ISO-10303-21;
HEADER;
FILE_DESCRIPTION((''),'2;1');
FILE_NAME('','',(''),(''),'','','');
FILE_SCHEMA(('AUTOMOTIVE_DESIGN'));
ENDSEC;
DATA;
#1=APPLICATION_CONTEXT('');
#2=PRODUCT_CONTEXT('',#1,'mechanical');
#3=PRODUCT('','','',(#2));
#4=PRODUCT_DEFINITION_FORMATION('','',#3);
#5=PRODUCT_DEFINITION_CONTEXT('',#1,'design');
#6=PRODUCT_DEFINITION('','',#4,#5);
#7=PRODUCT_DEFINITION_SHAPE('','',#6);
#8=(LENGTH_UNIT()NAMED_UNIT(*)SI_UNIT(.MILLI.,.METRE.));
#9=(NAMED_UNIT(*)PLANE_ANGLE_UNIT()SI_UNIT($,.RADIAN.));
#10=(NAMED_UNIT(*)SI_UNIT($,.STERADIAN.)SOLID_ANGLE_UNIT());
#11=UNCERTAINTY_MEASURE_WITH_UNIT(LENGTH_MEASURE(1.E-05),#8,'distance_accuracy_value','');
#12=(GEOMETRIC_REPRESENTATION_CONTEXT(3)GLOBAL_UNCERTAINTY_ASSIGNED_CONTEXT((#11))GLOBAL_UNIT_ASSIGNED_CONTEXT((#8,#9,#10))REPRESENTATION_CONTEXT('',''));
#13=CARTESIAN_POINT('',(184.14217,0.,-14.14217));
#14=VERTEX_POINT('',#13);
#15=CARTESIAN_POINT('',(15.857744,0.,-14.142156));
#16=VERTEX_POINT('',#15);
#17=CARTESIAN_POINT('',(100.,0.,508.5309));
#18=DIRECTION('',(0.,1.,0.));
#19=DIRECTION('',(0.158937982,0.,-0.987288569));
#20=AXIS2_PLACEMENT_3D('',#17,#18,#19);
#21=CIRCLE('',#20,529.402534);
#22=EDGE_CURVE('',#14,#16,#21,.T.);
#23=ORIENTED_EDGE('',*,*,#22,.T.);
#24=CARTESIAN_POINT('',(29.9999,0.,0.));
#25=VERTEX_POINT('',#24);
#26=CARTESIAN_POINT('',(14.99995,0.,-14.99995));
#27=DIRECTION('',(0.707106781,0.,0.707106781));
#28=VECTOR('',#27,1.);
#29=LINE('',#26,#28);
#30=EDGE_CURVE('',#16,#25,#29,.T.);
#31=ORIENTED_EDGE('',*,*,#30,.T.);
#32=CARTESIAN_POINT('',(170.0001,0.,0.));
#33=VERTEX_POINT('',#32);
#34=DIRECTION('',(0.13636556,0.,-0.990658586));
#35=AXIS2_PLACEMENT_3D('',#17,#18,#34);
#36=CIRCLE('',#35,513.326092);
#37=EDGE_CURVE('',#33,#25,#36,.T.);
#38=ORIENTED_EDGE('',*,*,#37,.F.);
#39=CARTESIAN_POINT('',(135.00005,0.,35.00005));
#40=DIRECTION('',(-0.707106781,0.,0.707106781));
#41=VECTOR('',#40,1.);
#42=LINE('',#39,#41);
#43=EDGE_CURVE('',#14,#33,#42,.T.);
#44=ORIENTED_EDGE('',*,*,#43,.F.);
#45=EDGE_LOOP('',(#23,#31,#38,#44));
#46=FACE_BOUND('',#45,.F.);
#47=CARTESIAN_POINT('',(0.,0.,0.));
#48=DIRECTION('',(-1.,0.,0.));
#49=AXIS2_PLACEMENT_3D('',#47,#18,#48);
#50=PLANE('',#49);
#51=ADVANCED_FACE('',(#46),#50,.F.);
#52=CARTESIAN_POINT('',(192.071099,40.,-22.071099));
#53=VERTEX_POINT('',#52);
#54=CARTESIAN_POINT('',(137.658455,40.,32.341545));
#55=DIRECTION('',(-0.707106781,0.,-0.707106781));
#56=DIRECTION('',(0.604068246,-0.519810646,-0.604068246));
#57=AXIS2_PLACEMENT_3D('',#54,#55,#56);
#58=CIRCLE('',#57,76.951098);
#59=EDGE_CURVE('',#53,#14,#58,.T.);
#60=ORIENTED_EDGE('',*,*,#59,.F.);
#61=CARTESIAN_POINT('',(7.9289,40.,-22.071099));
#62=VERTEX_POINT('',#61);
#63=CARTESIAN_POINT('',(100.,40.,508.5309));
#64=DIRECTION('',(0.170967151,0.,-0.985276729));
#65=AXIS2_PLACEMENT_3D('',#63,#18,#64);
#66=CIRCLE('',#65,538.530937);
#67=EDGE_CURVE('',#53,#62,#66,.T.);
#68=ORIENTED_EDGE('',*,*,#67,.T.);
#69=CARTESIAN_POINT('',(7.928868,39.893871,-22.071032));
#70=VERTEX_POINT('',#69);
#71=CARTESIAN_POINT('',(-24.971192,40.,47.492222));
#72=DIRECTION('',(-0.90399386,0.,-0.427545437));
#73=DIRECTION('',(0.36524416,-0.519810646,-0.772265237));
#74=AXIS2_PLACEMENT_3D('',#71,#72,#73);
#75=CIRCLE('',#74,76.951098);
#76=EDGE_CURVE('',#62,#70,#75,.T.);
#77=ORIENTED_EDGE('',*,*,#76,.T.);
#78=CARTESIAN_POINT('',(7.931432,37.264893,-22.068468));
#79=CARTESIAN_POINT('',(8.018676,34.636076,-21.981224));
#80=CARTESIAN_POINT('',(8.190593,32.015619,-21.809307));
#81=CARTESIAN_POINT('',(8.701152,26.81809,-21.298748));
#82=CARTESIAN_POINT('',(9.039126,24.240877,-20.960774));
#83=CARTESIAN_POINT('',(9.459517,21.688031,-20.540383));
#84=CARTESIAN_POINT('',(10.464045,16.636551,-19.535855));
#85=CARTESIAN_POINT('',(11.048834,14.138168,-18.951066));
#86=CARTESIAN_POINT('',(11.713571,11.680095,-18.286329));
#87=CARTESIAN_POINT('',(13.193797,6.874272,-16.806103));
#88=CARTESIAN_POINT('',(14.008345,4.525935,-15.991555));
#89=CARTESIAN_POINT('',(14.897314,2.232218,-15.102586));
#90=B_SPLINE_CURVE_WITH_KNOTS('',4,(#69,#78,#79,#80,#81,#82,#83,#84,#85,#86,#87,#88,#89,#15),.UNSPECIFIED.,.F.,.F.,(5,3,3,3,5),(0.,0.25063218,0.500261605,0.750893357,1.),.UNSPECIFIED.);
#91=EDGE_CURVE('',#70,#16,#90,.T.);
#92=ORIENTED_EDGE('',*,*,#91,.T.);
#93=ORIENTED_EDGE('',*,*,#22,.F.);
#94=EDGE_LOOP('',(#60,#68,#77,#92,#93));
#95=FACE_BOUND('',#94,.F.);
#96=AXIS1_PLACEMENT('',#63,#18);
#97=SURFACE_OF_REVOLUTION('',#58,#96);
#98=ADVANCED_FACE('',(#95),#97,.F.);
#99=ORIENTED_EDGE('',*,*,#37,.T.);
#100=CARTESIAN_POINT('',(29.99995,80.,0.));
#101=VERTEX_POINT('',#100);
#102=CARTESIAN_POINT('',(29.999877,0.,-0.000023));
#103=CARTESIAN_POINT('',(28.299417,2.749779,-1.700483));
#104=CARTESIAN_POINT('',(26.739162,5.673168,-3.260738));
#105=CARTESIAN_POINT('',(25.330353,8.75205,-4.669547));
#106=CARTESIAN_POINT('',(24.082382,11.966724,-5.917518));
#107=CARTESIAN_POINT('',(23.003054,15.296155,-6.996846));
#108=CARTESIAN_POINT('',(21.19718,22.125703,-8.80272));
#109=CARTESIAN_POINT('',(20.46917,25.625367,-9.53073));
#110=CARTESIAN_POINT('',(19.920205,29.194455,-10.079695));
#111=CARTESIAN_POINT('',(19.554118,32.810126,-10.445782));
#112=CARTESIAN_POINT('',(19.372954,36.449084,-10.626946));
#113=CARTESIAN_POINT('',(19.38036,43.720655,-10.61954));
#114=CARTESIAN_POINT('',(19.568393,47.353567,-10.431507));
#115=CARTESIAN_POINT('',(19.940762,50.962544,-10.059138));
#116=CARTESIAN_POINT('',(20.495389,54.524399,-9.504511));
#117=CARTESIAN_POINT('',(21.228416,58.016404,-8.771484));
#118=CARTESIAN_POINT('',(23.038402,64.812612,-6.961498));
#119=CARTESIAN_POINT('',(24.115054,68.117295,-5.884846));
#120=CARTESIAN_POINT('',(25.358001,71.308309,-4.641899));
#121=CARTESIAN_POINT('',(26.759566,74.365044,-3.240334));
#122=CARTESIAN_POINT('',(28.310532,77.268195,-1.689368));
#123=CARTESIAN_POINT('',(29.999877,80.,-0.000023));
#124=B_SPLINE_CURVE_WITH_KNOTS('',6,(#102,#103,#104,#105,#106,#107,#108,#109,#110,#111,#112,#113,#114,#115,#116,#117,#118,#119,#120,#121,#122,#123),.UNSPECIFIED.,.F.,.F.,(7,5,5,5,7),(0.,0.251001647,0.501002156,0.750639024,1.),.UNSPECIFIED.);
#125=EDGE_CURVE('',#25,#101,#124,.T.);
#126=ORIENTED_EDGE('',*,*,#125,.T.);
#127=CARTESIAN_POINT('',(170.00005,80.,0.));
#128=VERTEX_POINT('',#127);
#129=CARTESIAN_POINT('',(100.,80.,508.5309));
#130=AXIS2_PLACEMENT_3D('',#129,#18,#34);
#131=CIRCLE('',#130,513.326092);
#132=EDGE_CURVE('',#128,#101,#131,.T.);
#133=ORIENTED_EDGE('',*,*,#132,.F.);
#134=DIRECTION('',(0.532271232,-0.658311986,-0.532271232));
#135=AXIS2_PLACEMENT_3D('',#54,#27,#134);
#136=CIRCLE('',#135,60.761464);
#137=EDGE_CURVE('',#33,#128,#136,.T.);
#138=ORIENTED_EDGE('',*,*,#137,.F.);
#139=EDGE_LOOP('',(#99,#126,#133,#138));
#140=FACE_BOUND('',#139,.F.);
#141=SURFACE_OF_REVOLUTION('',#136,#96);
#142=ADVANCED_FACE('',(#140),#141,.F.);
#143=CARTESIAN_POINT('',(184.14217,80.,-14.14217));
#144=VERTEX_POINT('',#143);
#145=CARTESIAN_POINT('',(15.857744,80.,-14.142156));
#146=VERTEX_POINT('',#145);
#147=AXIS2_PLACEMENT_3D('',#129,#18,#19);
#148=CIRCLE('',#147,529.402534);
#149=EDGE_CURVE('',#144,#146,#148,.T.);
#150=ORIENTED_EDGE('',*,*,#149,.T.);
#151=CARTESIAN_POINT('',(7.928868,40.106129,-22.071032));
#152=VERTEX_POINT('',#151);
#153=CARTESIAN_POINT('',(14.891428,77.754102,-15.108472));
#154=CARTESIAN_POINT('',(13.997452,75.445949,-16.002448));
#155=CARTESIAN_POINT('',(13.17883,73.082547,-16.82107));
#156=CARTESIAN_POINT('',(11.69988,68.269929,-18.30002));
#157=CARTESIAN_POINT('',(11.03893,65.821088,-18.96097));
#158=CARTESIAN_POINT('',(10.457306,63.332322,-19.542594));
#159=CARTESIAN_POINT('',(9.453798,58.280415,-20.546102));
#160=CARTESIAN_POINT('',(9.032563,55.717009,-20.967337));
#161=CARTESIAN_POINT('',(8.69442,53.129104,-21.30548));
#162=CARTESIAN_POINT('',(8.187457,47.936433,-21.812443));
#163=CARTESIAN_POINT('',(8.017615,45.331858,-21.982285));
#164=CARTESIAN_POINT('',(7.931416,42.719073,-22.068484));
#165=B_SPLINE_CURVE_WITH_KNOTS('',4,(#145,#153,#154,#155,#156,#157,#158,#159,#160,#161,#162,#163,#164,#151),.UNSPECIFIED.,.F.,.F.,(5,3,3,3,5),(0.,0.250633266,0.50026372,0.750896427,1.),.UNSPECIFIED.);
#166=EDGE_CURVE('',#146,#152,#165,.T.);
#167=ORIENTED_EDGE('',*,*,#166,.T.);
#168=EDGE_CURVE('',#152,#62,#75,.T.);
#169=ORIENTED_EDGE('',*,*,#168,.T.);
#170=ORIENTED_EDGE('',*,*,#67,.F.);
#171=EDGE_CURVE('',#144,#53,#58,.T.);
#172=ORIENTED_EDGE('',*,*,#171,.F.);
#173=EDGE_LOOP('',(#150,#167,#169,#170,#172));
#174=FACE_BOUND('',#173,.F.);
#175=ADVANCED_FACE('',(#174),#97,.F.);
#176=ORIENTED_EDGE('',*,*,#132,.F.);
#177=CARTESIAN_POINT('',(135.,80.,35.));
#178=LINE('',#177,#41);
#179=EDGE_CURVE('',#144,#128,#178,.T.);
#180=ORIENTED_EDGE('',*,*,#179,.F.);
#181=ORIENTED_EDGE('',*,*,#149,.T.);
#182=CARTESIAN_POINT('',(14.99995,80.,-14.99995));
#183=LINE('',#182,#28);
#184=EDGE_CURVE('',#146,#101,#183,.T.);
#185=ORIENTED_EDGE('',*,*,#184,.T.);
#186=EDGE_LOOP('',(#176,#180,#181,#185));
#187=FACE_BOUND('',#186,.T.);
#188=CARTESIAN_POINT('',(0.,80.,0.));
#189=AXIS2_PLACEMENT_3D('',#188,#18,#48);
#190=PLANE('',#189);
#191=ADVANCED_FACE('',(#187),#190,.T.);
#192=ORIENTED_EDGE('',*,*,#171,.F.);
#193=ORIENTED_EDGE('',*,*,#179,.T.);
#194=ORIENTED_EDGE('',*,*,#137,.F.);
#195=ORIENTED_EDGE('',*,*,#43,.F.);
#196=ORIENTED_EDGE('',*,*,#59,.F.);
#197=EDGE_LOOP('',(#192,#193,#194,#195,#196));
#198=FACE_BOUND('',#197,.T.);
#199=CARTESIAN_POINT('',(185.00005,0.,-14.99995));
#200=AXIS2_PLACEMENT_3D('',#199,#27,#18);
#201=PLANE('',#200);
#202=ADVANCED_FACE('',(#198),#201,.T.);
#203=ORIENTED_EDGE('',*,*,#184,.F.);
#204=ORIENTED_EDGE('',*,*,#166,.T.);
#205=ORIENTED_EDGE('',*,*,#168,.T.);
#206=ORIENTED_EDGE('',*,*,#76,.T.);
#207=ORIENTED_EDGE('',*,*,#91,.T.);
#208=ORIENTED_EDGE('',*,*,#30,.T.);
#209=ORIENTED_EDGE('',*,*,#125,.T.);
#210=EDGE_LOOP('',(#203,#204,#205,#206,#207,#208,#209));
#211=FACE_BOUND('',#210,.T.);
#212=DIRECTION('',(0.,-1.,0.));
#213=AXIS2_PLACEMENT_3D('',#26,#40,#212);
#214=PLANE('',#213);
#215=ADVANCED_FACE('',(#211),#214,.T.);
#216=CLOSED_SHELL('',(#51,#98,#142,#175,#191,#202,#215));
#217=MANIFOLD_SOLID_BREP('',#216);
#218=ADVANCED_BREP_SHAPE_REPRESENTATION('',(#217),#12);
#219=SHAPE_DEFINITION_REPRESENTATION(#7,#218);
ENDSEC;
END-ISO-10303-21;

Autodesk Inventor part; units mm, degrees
ref_plane "YZ Plane" through (0, 0, 0) normal (1, 0, 0) x (0, 1, 0)
ref_plane "XZ Plane" through (0, 0, 0) normal (0, 1, 0) x (-1, 0, 0)
ref_plane "XY Plane" through (0, 0, 0) normal (0, 0, 1) x (1, 0, 0)
sketch "Эскиз1" plane through (0, 0, 0) normal (0, 1, 0) x (-1, 0, 0)
  line L0 (0, 0) -> (-200, 0)
  line L1 (-200, 0) -> (-200, -30)
  line L2 (-200, -30) -> (0, -30)
  line L3 (0, -30) -> (0, 0)
  dimension "d0" = 200
  dimension "d1" = 30
extrude "Выдавливание1" add sketch "Эскиз1" along normal blind 80
chamfer "Фаска1" distance 30 angle 45 2 edges at (0, 40, 0) (200, 40, 0)
sketch "Эскиз3" plane through (0, 80, 0) normal (0, 1, 0) x (1, 0, 0)
  line L0 (200, 30) -> (170, 0) projected
  line L1 (200, 30) -> (0, 30) projected
  line L2 (30, 0) -> (0, 30) projected
  line L3 (30, 0) -> (170, 0) projected
  line L4 (30, 0) -> (0, 30) projected
  line L5 (15, 15) -> (7.9289, 22.0711)
  arc A0 (192.0711, 22.0711) -> (7.9289, 22.0711) centre (100, -508.5309) ccw
  line L6 (200, 30) -> (0, 30) projected
  line L7 (30, 0) -> (170, 0) projected
  arc A1 (170, 0) -> (30, 0) centre (100, -508.5309) ccw
  point P0 (0, 0)
  point P1 (100, 0)
  point P2 (100, 0)
  dimension "d11" = 10
extrude "Выдавливание3" cut sketch "Эскиз3" against normal through all contours L0 A0 L1 | A0 L2 L1 | L3 A1
sketch "Эскиз4" plane through (192.0711, 0, -22.0711) normal (0.7071068, 0, 0.7071068) x (0.7071068, 0, -0.7071068)
  line L0 (0, 0) -> (0, 80) projected
  line L1 (0, 80) -> (-31.2132, 80) projected
  line L2 (-31.2132, 80) -> (-31.2132, 0) projected
  line L3 (-31.2132, 0) -> (0, 0) projected
  line L4 (0, 80) -> (-130.2082, 80) projected
  arc A0 (-11.2132, 0) -> (-11.2132, 80) centre (-76.9511, 40) ccw
  arc A1 (-31.2132, 0) -> (-31.2132, 80) centre (-76.9511, 40) ccw
  line L5 (-31.2132, 0) -> (0, 0) projected
  line L6 (0, 0) -> (0, 80) projected
  line L7 (-31.2132, 80) -> (-11.2132, 80)
  line L8 (-31.2132, 0) -> (-11.2132, 0)
  point P0 (-151.4214, 0)
  point P1 (-31.2132, 40)
  dimension "d14" = 20
sketch3d "3D эскиз1"
  arc A0 (192.0711, 80, -22.0711) -> (7.9289, 80, -22.0711) centre (100, 80, 508.5309) ccw
sweep "Сдвиг1" cut profiles "Эскиз4" path "3D эскиз1" contours L3 A0 L0 | A0 L1 L0 | L2 A1
properties part number "dou_short_round" material "Красное дерево"
